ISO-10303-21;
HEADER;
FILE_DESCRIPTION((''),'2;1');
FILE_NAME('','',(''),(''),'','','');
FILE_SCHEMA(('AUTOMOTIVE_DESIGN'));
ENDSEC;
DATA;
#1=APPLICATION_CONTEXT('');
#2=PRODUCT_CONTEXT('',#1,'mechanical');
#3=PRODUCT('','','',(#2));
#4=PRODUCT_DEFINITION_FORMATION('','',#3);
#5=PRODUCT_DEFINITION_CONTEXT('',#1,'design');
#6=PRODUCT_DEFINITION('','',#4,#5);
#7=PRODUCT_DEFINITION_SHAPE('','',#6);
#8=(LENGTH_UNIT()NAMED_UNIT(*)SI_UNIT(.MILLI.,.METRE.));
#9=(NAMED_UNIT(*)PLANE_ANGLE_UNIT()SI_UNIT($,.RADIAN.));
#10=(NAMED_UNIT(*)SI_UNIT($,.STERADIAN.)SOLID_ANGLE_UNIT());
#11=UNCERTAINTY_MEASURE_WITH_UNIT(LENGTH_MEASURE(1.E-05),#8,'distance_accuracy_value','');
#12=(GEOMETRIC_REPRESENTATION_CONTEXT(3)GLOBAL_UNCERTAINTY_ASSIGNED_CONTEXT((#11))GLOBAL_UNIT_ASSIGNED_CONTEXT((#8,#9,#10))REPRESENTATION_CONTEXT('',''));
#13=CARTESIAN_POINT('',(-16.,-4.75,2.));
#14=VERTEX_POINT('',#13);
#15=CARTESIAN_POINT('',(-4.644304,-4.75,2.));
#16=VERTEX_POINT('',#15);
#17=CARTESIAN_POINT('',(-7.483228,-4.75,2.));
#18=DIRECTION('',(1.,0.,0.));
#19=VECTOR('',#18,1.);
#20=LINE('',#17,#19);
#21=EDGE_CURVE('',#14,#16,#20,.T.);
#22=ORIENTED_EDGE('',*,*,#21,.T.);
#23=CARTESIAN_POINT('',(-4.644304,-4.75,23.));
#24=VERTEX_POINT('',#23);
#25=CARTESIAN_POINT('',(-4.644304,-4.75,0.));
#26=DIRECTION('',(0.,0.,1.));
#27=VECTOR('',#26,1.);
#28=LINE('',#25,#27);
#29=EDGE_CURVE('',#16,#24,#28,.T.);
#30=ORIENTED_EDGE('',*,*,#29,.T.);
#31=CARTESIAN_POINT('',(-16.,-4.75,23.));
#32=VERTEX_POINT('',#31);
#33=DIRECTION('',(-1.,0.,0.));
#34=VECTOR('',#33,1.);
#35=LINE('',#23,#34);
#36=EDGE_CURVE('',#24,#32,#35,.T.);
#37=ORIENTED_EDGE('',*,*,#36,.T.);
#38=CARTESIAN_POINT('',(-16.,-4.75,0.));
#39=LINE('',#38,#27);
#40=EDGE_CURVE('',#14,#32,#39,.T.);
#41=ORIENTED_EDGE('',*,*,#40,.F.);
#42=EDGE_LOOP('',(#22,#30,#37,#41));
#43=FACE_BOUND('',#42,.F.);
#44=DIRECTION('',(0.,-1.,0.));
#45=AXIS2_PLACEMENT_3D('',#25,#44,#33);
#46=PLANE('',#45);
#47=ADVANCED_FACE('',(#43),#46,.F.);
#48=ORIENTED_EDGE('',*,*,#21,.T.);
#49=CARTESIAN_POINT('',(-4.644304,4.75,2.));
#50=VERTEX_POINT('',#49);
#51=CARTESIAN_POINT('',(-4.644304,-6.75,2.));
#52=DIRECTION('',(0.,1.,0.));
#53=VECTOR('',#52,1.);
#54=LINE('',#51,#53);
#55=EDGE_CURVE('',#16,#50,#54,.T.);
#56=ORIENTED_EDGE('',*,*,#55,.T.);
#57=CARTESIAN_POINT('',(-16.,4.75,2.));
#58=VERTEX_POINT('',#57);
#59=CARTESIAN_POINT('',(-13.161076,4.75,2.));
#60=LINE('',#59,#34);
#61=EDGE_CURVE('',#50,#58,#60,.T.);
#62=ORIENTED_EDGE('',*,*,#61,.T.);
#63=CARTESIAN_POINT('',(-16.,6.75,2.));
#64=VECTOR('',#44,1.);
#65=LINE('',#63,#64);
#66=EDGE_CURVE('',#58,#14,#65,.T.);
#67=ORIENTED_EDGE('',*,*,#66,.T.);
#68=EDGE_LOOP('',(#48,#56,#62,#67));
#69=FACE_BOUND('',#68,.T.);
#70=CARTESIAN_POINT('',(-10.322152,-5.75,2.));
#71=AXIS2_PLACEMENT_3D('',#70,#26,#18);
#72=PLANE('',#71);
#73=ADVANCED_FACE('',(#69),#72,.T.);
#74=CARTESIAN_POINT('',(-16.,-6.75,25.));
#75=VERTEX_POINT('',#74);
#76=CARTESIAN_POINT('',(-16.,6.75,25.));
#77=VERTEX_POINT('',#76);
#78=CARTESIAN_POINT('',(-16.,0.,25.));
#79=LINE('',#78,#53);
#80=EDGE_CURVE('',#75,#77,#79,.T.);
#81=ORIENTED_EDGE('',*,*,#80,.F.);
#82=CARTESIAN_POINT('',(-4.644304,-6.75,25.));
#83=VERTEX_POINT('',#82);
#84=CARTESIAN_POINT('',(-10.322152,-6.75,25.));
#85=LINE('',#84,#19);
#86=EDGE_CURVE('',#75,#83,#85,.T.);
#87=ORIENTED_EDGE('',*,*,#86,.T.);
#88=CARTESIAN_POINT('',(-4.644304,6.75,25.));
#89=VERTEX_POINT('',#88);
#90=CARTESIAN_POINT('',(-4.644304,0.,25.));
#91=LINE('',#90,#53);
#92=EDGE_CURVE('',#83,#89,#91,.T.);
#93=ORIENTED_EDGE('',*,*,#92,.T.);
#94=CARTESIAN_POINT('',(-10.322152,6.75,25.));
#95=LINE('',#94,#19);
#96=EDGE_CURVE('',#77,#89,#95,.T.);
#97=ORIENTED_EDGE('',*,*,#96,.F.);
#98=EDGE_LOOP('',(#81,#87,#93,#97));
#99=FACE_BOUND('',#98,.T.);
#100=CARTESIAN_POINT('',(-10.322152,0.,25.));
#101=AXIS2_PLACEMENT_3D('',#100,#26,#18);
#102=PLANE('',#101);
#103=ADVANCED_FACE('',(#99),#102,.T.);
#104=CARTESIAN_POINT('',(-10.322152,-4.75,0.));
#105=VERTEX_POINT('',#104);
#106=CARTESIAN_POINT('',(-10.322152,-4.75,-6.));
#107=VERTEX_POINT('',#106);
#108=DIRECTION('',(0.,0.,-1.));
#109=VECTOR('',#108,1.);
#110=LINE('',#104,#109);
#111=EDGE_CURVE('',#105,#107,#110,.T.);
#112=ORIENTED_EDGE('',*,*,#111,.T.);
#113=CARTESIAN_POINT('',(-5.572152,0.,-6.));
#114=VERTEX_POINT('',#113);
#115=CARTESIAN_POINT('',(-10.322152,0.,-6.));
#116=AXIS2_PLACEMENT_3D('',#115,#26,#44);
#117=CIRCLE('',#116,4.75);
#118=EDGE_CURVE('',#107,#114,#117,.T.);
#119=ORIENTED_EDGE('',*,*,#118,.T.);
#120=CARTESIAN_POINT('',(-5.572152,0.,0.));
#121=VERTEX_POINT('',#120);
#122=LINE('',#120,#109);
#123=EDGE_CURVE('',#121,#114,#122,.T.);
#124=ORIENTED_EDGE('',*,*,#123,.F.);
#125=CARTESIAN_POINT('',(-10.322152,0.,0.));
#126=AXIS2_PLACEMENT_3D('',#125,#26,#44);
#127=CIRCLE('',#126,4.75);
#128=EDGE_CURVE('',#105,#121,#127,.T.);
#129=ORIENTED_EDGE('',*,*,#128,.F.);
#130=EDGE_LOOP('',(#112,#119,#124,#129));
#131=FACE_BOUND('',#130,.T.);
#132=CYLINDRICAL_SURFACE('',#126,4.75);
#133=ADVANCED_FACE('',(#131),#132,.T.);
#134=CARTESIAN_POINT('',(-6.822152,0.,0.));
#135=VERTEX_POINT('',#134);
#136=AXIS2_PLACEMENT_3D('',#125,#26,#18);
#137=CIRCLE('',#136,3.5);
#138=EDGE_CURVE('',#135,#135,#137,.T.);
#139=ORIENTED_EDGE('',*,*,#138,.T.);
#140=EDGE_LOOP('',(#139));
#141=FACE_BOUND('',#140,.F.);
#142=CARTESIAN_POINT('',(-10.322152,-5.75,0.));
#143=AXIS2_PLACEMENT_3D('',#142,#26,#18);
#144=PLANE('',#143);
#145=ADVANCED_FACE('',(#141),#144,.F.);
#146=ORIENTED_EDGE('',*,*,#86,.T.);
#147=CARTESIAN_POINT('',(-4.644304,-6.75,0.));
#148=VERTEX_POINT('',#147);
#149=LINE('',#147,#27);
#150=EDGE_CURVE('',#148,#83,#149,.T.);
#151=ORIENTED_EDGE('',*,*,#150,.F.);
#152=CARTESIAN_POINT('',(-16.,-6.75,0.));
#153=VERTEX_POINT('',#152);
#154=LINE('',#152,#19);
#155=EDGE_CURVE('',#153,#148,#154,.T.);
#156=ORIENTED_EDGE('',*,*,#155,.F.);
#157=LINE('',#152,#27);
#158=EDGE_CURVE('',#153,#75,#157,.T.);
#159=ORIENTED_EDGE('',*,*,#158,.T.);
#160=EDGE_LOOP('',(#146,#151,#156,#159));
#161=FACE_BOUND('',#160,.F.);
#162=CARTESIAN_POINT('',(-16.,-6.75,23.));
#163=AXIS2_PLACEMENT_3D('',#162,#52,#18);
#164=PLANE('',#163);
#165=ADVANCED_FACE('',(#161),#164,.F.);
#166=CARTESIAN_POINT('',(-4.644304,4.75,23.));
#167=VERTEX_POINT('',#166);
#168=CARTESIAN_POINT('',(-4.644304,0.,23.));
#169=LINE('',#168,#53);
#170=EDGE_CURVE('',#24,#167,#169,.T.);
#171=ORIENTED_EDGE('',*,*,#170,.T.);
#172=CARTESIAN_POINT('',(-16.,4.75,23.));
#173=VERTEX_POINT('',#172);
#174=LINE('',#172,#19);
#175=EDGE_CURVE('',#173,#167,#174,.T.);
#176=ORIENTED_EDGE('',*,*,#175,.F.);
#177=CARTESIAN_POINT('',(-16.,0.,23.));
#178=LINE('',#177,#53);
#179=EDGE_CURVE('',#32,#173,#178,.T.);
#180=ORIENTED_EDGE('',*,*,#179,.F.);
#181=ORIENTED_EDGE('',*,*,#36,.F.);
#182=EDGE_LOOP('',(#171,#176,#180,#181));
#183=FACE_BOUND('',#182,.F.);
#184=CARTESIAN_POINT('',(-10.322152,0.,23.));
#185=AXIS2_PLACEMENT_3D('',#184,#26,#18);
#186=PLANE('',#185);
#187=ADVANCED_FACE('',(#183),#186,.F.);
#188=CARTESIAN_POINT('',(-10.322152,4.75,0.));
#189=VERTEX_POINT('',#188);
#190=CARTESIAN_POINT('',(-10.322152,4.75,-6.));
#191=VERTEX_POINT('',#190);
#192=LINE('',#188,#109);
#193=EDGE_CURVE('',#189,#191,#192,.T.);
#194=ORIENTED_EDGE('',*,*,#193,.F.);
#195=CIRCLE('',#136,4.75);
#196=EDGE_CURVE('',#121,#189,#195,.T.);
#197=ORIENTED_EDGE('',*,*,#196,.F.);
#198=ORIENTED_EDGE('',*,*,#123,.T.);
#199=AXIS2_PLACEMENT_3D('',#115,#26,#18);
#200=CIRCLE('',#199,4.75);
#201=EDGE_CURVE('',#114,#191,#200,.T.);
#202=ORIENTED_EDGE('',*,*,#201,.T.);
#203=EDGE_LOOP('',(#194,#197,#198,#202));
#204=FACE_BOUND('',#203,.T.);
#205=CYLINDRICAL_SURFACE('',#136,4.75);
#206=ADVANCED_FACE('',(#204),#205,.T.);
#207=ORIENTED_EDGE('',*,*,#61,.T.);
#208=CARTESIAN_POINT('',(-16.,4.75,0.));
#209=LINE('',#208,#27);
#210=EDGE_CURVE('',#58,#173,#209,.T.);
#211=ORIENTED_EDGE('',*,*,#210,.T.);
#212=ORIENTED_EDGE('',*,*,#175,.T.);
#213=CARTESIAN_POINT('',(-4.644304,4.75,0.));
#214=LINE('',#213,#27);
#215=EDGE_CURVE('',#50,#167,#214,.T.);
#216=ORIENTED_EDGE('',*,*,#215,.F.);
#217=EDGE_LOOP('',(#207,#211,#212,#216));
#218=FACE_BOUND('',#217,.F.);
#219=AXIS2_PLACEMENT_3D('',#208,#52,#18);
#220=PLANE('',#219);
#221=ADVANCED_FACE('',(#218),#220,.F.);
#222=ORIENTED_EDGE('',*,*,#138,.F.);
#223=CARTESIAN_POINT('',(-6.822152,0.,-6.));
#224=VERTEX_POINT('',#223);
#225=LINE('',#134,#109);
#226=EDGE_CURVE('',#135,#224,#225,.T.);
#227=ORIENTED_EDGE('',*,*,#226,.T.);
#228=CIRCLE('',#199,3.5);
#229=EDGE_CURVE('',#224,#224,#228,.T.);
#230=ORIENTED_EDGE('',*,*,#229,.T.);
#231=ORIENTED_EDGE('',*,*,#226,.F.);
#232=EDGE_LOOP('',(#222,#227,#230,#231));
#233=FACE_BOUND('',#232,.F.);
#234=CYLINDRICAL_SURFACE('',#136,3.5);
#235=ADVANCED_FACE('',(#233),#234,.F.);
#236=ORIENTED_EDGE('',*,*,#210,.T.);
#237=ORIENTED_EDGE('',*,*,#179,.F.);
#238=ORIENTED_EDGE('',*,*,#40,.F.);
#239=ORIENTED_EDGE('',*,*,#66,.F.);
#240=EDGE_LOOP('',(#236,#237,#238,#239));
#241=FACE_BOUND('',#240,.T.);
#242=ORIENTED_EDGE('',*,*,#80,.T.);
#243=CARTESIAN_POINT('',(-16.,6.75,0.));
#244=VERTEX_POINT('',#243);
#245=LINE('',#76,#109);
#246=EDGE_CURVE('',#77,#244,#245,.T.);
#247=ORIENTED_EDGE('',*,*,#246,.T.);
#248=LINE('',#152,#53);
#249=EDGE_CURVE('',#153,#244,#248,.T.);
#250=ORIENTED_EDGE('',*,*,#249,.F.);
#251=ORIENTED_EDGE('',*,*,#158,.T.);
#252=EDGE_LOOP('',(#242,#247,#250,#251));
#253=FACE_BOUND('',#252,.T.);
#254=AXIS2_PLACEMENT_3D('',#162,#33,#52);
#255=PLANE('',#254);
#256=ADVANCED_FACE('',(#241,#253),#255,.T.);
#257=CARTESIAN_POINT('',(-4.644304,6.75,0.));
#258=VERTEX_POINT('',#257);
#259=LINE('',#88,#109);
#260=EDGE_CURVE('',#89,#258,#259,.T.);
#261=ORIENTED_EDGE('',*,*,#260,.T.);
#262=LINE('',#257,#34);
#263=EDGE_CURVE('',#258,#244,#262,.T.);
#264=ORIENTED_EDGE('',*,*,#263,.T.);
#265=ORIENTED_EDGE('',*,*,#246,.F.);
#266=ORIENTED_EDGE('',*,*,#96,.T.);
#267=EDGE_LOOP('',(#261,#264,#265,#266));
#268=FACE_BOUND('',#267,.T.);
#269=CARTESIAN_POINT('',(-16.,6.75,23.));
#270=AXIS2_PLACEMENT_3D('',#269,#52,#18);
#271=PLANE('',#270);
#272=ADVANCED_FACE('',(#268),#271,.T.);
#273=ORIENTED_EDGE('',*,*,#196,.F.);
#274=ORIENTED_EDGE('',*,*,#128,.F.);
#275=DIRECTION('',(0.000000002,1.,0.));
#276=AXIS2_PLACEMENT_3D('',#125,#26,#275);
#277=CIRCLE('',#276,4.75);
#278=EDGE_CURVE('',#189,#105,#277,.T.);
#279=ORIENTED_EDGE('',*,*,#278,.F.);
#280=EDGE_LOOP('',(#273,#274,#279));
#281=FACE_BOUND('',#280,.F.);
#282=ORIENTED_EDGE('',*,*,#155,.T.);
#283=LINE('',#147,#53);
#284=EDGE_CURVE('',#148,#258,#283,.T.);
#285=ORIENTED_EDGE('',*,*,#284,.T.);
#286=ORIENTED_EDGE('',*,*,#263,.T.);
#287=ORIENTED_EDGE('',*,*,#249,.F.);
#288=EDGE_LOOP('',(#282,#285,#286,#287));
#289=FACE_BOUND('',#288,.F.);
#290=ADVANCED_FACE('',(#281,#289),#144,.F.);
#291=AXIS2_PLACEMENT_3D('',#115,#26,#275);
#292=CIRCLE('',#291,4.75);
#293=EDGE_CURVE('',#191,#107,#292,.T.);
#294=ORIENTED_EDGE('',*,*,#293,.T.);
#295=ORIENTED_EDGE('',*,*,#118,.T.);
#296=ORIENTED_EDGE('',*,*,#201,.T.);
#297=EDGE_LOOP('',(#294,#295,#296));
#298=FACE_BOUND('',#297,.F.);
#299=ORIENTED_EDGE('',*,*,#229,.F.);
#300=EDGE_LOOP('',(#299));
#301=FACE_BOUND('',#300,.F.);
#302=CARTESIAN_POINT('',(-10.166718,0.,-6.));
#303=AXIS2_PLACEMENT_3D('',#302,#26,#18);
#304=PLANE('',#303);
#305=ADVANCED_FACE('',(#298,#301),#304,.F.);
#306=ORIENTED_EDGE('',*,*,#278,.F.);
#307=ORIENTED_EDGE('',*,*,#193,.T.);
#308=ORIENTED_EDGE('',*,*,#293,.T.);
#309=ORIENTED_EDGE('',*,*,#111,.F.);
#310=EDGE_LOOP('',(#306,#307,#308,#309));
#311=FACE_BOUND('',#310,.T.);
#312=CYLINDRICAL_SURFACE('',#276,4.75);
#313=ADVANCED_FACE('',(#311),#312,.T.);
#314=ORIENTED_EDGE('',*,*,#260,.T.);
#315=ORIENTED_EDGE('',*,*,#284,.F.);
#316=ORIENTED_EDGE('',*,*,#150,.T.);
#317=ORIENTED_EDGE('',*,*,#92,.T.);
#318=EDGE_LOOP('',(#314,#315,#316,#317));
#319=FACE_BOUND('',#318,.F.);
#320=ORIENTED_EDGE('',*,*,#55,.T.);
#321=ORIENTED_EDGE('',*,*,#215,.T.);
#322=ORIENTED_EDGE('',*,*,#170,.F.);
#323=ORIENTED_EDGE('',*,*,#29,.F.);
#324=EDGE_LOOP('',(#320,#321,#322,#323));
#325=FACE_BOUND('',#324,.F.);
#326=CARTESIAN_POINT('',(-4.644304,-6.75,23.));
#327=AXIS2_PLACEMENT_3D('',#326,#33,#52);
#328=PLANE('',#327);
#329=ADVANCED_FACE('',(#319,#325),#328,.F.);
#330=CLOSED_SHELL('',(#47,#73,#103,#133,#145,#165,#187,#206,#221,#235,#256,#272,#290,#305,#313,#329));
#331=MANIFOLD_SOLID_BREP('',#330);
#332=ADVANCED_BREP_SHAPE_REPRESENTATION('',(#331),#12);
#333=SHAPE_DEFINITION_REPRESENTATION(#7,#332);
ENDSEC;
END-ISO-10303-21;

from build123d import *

# Parameters (mm, degrees)
F0_R     = 3.5
F1_DEPTH = 2
F2_DEPTH = 23
F3_W     = 11.3556964174
F3_H     = 13.5
F4_DEPTH = 2
F5_DEPTH = 6


with BuildPart() as f1:
    # F0 (on Top) → F1 (new body)
    with BuildSketch(Plane.XY):
        Polygon((-4.6443035826, -6.75), (-4.6443035826, -4.75), (-10.3221517913, -4.75), (-16, -4.75), (-16, -6.75), align=None)
        with BuildLine():
            Line((-10.3221517913, -4.75), (-4.6443035826, -4.75))
            Line((-4.6443035826, -4.75), (-4.6443035826, 4.75))
            Line((-4.6443035826, 4.75), (-10.3221517821, 4.75))
            ThreePointArc((-10.3221517821, 4.75), (-6.9633945774, 3.3587572074), (-5.5721517913, 0))
            ThreePointArc((-5.5721517913, 0), (-6.9633945807, -3.3587572106), (-10.3221517913, -4.75))
        make_face()
        with BuildLine():
            Line((-16, -4.75), (-10.3221517913, -4.75))
            ThreePointArc((-10.3221517913, -4.75), (-15.0721517913, 4.6e-09), (-10.3221517821, 4.75))
            Line((-10.3221517821, 4.75), (-16, 4.75))
            Line((-16, 4.75), (-16, -4.75))
        make_face()
        with BuildLine():
            ThreePointArc((-10.3221517821, 4.75), (-15.0721517913, 4.6e-09), (-10.3221517913, -4.75))
            ThreePointArc((-10.3221517913, -4.75), (-6.9633945807, -3.3587572106), (-5.5721517913, 0))
            ThreePointArc((-5.5721517913, 0), (-6.9633945774, 3.3587572074), (-10.3221517821, 4.75))
        make_face()
        with Locations((-10.3221517913, 0)):
            Circle(F0_R, mode=Mode.SUBTRACT)
        Polygon((-10.3221517821, 4.75), (-4.6443035826, 4.75), (-4.6443035826, 6.75), (-16, 6.75), (-16, 4.75), align=None)
        with Locations((-10.3221517913, 0)):
            Circle(F0_R)
    extrude(amount=F1_DEPTH)

    # F0 (on Top) → F2 (join)
    with BuildSketch(Plane.XY):
        Polygon((-10.3221517821, 4.75), (-4.6443035826, 4.75), (-4.6443035826, 6.75), (-16, 6.75), (-16, 4.75), align=None)
        Polygon((-4.6443035826, -6.75), (-4.6443035826, -4.75), (-10.3221517913, -4.75), (-16, -4.75), (-16, -6.75), align=None)
    extrude(amount=F2_DEPTH)

    # F3 (on face) → F4 (join)
    with BuildSketch(Plane.XY.offset(23)):
        with Locations((-10.3221517913, 0)):
            Rectangle(F3_W, F3_H)
    extrude(amount=F4_DEPTH)

    # F0 (on Top) → F5 (join)
    with BuildSketch(Plane.XY):
        with BuildLine():
            ThreePointArc((-10.3221517821, 4.75), (-15.0721517913, 4.6e-09), (-10.3221517913, -4.75))
            ThreePointArc((-10.3221517913, -4.75), (-6.9633945807, -3.3587572106), (-5.5721517913, 0))
            ThreePointArc((-5.5721517913, 0), (-6.9633945774, 3.3587572074), (-10.3221517821, 4.75))
        make_face()
        with Locations((-10.3221517913, 0)):
            Circle(F0_R, mode=Mode.SUBTRACT)
    extrude(amount=-F5_DEPTH)


solid = f1.part
